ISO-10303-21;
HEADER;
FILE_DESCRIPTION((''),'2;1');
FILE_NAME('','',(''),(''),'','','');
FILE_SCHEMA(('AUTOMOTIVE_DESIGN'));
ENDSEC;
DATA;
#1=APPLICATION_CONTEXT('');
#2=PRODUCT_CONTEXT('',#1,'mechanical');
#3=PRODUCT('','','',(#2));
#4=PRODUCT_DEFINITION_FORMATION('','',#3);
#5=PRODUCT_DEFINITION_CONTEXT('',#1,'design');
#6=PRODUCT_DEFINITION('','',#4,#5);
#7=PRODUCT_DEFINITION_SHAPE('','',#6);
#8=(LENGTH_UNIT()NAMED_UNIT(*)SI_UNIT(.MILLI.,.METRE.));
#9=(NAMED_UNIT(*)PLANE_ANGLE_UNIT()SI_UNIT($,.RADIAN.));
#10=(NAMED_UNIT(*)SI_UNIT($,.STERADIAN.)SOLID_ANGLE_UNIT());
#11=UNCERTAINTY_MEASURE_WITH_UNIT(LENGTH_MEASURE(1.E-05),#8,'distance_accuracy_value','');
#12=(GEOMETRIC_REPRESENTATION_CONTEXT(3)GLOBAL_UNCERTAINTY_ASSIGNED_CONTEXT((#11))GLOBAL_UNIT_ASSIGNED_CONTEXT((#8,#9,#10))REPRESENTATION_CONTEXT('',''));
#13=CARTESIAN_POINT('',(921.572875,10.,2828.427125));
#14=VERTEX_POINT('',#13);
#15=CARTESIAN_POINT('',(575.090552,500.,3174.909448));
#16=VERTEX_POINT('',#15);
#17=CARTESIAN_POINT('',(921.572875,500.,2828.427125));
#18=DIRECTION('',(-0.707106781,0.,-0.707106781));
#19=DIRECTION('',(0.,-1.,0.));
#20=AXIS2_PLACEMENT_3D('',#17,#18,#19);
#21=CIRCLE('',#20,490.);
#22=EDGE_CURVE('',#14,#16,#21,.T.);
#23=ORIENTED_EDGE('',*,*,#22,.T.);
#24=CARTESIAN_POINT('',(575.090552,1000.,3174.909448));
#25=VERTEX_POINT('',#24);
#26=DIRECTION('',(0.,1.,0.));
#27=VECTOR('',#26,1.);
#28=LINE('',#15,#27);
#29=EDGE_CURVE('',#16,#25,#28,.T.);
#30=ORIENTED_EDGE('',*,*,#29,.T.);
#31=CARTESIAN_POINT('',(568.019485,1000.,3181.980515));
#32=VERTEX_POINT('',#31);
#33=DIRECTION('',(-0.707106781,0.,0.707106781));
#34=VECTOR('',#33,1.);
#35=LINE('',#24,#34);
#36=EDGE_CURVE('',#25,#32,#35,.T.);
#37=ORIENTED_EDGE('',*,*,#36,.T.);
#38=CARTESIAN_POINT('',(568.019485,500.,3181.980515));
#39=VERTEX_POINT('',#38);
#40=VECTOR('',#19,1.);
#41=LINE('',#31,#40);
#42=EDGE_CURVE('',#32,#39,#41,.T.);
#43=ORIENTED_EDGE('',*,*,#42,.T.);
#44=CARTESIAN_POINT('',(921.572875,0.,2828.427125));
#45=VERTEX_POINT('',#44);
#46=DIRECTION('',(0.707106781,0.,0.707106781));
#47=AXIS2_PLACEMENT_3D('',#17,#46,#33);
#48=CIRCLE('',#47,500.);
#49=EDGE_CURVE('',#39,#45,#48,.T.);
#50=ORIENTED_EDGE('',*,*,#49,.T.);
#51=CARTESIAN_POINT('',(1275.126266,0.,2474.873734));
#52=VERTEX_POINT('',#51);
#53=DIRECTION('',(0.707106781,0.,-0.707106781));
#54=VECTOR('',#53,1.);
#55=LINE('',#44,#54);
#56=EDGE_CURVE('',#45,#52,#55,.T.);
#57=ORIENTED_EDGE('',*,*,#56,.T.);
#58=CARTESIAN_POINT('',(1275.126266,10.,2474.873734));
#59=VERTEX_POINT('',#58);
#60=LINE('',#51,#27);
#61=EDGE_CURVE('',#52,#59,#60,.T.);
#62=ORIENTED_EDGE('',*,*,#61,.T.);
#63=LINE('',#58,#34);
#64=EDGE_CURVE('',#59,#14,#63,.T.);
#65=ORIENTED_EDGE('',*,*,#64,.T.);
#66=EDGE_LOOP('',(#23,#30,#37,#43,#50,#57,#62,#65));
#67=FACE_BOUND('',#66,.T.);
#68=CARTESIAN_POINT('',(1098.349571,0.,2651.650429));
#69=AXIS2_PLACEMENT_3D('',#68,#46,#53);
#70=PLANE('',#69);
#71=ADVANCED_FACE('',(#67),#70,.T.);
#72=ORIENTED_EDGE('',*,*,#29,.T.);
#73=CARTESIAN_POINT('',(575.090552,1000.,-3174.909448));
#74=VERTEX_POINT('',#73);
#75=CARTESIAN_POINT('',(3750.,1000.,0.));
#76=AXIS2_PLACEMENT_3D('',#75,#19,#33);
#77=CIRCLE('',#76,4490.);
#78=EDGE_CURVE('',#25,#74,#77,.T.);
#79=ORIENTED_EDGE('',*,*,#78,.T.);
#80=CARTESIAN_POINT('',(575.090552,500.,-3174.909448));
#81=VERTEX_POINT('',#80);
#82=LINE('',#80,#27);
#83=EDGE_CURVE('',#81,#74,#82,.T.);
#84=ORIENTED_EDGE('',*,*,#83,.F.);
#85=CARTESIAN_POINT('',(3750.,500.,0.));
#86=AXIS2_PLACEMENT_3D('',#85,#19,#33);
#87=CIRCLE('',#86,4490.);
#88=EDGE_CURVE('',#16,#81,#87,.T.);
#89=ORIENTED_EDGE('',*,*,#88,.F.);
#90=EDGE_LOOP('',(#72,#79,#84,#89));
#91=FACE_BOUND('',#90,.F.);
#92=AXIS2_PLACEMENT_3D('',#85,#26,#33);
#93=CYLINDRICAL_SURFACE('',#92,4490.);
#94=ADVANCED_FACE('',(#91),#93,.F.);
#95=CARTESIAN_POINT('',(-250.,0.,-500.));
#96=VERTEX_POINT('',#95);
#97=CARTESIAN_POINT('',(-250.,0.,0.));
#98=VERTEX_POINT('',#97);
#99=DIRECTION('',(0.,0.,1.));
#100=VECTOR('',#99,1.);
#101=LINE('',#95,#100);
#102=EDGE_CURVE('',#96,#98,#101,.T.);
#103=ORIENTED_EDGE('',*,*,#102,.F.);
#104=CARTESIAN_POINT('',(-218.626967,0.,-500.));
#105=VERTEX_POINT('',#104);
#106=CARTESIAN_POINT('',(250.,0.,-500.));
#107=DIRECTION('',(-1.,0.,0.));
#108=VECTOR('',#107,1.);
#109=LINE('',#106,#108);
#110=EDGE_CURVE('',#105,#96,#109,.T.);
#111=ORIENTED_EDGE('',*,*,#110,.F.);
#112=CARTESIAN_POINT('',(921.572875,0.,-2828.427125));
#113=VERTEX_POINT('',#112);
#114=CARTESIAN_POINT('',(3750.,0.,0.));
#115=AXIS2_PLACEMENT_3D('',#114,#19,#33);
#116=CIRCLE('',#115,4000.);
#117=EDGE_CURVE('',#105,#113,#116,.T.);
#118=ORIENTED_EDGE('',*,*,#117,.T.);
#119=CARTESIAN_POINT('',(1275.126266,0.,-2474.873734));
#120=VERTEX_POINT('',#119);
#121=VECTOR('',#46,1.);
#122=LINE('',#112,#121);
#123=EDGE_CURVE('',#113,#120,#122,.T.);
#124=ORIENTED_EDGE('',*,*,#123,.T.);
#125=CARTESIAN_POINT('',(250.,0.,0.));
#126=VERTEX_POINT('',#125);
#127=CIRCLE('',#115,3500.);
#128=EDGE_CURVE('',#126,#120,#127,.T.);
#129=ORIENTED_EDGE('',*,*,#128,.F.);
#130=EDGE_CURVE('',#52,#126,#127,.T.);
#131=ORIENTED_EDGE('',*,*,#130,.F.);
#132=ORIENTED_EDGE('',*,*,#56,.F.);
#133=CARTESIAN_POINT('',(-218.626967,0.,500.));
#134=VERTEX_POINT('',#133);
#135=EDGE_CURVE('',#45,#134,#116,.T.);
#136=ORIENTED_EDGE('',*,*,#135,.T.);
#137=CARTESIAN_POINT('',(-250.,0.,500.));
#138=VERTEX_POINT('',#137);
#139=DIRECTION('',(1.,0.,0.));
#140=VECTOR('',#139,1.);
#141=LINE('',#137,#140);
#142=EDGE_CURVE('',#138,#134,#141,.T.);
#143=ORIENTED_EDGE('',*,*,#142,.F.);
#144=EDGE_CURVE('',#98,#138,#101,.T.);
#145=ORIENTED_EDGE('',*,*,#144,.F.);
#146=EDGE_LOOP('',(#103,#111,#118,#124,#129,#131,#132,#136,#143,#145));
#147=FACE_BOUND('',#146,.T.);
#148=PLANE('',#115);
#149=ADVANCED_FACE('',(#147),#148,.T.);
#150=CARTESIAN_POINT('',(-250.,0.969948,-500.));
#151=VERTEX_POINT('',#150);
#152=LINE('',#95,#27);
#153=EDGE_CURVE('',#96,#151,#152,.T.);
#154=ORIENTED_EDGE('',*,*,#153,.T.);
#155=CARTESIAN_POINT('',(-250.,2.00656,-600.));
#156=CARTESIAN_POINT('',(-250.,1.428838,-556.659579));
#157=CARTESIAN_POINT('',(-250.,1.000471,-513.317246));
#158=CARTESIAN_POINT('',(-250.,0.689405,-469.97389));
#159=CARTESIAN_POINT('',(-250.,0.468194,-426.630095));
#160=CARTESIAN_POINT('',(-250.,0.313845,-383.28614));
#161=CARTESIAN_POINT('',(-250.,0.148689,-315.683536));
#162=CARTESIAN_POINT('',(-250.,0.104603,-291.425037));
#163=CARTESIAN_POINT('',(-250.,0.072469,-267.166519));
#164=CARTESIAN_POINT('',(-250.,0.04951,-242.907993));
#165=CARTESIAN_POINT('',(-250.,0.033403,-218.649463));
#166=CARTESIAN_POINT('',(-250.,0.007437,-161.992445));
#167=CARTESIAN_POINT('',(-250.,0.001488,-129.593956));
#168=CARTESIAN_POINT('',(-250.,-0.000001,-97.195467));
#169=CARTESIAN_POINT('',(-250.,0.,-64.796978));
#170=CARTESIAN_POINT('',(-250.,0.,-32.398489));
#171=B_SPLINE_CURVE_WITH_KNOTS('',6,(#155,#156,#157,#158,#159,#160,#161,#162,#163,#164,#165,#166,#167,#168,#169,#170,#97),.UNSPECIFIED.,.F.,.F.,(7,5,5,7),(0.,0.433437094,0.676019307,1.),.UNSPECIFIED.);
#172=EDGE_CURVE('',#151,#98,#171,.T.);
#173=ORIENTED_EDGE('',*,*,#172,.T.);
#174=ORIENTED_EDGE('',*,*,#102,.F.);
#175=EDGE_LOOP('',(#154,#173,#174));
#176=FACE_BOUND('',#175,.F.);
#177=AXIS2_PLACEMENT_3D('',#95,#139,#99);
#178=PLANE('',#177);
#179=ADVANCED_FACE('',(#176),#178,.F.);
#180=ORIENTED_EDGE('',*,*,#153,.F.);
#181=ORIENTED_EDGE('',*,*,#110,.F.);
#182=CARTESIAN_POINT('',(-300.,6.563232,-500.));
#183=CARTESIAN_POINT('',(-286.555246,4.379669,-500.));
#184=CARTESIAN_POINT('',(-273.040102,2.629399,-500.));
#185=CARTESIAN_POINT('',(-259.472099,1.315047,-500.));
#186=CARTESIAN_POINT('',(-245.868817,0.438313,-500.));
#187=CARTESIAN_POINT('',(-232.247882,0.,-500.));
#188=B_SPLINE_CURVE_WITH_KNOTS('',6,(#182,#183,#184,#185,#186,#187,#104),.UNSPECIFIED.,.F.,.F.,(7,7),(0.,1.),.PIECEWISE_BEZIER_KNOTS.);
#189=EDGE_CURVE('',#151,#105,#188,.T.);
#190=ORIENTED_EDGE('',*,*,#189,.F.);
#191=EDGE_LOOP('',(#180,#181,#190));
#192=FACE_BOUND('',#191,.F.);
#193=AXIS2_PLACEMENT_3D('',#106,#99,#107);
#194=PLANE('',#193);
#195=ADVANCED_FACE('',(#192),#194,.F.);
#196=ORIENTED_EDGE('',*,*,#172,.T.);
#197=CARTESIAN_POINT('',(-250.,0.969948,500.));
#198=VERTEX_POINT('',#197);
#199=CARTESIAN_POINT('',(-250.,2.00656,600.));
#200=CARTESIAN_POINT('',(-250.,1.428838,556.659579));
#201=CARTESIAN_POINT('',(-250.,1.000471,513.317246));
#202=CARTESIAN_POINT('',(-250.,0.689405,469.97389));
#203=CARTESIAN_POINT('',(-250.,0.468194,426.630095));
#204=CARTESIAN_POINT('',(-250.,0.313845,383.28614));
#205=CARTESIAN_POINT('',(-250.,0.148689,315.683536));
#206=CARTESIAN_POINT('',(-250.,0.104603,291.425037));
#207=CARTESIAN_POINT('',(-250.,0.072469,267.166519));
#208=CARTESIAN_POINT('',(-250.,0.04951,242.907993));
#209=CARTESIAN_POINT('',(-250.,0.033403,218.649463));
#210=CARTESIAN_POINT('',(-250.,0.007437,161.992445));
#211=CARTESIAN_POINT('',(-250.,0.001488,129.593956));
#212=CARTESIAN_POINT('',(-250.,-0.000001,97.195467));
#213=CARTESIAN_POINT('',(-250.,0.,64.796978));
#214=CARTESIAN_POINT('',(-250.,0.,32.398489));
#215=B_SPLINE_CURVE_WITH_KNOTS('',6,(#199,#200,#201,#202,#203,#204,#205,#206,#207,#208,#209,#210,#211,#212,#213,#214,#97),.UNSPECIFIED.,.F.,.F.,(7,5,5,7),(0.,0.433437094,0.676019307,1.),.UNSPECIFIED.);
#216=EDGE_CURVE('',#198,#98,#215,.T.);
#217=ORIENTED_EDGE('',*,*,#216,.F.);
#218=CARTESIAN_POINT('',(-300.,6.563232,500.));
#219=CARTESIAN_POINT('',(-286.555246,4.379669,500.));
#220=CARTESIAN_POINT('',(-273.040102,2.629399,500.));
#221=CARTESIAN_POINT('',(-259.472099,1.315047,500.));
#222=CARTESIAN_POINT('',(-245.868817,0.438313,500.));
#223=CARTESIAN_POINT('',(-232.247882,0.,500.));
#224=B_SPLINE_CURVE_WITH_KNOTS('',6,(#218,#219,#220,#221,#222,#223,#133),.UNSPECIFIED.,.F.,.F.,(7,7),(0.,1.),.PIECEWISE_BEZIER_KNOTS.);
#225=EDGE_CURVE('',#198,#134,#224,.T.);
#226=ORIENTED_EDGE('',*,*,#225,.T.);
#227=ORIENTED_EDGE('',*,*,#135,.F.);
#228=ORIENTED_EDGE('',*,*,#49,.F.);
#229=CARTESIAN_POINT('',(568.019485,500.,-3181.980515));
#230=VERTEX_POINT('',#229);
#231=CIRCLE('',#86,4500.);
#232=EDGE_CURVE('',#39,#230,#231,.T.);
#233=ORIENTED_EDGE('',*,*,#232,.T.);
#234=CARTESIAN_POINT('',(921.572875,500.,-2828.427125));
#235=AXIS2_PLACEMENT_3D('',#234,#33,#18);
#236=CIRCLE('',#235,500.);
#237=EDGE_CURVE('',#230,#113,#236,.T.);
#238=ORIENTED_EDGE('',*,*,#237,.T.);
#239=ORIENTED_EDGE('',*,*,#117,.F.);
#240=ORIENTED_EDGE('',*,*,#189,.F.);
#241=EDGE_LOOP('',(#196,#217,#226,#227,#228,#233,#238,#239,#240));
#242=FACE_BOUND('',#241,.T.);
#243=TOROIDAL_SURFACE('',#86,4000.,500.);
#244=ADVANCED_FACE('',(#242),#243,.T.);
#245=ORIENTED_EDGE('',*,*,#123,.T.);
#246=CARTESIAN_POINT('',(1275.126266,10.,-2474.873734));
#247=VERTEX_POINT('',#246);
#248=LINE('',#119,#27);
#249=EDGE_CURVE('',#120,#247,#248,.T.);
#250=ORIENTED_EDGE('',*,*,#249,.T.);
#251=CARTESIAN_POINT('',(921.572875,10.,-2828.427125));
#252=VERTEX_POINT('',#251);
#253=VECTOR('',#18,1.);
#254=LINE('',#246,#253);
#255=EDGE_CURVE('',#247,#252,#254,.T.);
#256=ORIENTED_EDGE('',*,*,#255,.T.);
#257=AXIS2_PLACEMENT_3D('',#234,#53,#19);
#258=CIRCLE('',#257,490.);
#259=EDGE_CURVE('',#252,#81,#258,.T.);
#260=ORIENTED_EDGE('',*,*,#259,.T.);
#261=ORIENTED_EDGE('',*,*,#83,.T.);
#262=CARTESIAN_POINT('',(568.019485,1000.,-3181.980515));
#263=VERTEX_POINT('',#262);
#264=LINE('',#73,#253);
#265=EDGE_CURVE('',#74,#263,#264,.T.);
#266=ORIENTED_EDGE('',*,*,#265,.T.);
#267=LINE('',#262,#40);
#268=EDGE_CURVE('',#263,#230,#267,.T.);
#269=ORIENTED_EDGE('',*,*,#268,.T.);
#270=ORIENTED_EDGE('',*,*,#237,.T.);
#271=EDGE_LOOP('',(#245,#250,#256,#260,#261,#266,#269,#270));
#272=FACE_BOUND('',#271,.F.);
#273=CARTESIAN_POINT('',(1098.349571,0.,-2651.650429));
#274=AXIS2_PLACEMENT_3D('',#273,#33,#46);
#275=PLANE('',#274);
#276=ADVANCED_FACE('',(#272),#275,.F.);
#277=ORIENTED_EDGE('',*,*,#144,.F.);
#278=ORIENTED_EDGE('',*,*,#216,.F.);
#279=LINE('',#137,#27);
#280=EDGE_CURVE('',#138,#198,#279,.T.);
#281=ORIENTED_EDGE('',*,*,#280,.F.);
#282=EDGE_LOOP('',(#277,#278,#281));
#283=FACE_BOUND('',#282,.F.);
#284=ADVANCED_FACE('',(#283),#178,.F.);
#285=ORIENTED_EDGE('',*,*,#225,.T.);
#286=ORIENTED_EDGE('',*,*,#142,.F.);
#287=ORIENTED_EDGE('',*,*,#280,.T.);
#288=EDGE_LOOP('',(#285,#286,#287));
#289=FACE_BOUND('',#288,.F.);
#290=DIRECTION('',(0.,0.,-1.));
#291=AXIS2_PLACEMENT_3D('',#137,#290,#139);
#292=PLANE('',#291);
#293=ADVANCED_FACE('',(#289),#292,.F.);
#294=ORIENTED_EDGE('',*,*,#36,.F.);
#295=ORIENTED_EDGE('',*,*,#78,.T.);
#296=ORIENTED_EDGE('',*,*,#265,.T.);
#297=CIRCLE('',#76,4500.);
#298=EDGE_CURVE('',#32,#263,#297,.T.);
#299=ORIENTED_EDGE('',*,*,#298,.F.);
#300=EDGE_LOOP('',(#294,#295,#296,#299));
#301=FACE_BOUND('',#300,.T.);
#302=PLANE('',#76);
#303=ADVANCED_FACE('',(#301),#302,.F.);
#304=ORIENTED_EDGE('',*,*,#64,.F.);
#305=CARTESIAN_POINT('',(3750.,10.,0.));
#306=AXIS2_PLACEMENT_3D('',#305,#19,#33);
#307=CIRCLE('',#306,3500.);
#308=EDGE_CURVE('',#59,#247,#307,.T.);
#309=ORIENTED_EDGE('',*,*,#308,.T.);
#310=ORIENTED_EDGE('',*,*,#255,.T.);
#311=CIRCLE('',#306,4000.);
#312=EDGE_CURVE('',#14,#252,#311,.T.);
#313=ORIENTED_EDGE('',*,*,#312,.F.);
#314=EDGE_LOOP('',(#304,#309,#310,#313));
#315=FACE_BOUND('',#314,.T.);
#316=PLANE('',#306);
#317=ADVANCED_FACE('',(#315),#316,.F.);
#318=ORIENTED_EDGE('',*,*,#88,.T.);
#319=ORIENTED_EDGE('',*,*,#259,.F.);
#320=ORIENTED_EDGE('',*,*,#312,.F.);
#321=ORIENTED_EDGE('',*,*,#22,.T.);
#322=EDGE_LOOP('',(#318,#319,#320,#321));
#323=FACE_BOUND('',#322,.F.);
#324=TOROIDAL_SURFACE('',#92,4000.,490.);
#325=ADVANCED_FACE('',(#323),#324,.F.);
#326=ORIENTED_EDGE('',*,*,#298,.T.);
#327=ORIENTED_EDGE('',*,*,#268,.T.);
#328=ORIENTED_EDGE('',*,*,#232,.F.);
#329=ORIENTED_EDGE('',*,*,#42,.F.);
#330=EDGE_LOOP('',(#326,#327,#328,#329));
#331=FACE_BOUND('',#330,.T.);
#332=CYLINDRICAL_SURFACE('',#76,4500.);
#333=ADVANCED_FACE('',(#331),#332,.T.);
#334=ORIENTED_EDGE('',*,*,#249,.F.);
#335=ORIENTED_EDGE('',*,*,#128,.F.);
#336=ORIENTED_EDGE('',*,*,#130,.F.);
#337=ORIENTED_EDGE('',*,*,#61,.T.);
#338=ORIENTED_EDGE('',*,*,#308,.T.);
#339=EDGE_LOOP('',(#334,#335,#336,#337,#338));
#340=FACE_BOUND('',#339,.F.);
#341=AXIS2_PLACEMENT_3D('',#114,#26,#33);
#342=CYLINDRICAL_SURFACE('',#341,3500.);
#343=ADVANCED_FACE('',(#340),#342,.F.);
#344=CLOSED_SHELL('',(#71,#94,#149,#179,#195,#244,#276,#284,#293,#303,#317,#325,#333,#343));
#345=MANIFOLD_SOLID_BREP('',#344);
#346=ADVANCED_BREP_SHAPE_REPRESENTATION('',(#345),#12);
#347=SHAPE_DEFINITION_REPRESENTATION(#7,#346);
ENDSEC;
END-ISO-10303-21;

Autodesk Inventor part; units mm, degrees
ref_plane "YZ Plane" through (0, 0, 0) normal (1, 0, 0) x (0, 1, 0)
ref_plane "XZ Plane" through (0, 0, 0) normal (0, 1, 0) x (-1, 0, 0)
ref_plane "XY Plane" through (0, 0, 0) normal (0, 0, 1) x (1, 0, 0)
sketch "Sketch1" plane through (0, 0, 0) normal (0, 1, 0) x (-1, 0, 0)
  line L0 (234.273325, 0) -> (-398.047733, 0)
  line L1 (0, 269.522777) -> (0, -364.967462)
  line L2 (250, 500) -> (-250, 500)
  line L3 (-250, 500) -> (-250, -500)
  line L4 (-250, -500) -> (250, -500)
  line L5 (250, -500) -> (250, 500)
  point P0 (0, 0)
  dimension "d0" = 1000
  dimension "d1" = 500
sketch "Sketch1 outline for Extrusion1" plane through (0, 0, 0) normal (0, 1, 0) x (-1, 0, 0)
  line L0 (250, -500) -> (250, 500)
  line L1 (-250, -500) -> (250, -500)
  line L2 (-250, 500) -> (-250, -500)
  line L3 (250, 500) -> (-250, 500)
extrude "Extrusion1" add sketch "Sketch1 outline for Extrusion1" along normal blind 10
fillet "Fillet1" radius 2 1 edges at (250, 10, 0)
sketch "Sketch4" plane through (0, 0, 0) normal (0, 0, 1) x (1, 0, 0)
  line L0 (-250, 0) -> (250, 0)
  arc A0 (-750, 500) -> (-250, 0) centre (-250, 500) ccw
  line L1 (-750, 500) -> (-750, 1000)
  line L2 (-250, 0) -> (-250, 10)
  line L3 (-787.939288, 1000) -> (-661.662469, 1000)
  line L4 (-740, 500) -> (-740, 1000)
  arc A1 (-740, 500) -> (-250, 10) centre (-250, 500) ccw
  line L5 (-250, 0) -> (-250, 10)
  line L6 (3750, 901.000805) -> (3750, -131.113672)
  line L7 (-250, 10) -> (250, 10)
  line L8 (-250, 10) -> (248, 10)
  line L9 (250, 10) -> (250, 0)
  line L10 (-250, 0) -> (250, 0)
  point P0 (0, 0)
  dimension "d17" = 500
  dimension "d18" = 10
  dimension "d19" = 1000
  dimension "d20" = 4000
sketch "Sketch4 outline for Revolution1" plane through (0, 0, 0) normal (0, 0, 1) x (1, 0, 0)
  arc A0 (-750, 500) -> (-250, 0) centre (-250, 500) ccw
  line L0 (-250, 0) -> (250, 0)
  line L1 (250, 0) -> (250, 10)
  line L2 (250, 10) -> (-250, 10)
  arc A1 (-250, 10) -> (-740, 500) centre (-250, 500) cw
  line L3 (-740, 500) -> (-740, 1000)
  line L4 (-740, 1000) -> (-750, 1000)
  line L5 (-750, 1000) -> (-750, 500)
revolve "Revolution1" add sketch "Sketch4 outline for Revolution1" angle 90 mid plane about axis through (3750, 901.000805, 0) along (0, -1, 0)
properties part number "baase" material "Stainless Steel"
